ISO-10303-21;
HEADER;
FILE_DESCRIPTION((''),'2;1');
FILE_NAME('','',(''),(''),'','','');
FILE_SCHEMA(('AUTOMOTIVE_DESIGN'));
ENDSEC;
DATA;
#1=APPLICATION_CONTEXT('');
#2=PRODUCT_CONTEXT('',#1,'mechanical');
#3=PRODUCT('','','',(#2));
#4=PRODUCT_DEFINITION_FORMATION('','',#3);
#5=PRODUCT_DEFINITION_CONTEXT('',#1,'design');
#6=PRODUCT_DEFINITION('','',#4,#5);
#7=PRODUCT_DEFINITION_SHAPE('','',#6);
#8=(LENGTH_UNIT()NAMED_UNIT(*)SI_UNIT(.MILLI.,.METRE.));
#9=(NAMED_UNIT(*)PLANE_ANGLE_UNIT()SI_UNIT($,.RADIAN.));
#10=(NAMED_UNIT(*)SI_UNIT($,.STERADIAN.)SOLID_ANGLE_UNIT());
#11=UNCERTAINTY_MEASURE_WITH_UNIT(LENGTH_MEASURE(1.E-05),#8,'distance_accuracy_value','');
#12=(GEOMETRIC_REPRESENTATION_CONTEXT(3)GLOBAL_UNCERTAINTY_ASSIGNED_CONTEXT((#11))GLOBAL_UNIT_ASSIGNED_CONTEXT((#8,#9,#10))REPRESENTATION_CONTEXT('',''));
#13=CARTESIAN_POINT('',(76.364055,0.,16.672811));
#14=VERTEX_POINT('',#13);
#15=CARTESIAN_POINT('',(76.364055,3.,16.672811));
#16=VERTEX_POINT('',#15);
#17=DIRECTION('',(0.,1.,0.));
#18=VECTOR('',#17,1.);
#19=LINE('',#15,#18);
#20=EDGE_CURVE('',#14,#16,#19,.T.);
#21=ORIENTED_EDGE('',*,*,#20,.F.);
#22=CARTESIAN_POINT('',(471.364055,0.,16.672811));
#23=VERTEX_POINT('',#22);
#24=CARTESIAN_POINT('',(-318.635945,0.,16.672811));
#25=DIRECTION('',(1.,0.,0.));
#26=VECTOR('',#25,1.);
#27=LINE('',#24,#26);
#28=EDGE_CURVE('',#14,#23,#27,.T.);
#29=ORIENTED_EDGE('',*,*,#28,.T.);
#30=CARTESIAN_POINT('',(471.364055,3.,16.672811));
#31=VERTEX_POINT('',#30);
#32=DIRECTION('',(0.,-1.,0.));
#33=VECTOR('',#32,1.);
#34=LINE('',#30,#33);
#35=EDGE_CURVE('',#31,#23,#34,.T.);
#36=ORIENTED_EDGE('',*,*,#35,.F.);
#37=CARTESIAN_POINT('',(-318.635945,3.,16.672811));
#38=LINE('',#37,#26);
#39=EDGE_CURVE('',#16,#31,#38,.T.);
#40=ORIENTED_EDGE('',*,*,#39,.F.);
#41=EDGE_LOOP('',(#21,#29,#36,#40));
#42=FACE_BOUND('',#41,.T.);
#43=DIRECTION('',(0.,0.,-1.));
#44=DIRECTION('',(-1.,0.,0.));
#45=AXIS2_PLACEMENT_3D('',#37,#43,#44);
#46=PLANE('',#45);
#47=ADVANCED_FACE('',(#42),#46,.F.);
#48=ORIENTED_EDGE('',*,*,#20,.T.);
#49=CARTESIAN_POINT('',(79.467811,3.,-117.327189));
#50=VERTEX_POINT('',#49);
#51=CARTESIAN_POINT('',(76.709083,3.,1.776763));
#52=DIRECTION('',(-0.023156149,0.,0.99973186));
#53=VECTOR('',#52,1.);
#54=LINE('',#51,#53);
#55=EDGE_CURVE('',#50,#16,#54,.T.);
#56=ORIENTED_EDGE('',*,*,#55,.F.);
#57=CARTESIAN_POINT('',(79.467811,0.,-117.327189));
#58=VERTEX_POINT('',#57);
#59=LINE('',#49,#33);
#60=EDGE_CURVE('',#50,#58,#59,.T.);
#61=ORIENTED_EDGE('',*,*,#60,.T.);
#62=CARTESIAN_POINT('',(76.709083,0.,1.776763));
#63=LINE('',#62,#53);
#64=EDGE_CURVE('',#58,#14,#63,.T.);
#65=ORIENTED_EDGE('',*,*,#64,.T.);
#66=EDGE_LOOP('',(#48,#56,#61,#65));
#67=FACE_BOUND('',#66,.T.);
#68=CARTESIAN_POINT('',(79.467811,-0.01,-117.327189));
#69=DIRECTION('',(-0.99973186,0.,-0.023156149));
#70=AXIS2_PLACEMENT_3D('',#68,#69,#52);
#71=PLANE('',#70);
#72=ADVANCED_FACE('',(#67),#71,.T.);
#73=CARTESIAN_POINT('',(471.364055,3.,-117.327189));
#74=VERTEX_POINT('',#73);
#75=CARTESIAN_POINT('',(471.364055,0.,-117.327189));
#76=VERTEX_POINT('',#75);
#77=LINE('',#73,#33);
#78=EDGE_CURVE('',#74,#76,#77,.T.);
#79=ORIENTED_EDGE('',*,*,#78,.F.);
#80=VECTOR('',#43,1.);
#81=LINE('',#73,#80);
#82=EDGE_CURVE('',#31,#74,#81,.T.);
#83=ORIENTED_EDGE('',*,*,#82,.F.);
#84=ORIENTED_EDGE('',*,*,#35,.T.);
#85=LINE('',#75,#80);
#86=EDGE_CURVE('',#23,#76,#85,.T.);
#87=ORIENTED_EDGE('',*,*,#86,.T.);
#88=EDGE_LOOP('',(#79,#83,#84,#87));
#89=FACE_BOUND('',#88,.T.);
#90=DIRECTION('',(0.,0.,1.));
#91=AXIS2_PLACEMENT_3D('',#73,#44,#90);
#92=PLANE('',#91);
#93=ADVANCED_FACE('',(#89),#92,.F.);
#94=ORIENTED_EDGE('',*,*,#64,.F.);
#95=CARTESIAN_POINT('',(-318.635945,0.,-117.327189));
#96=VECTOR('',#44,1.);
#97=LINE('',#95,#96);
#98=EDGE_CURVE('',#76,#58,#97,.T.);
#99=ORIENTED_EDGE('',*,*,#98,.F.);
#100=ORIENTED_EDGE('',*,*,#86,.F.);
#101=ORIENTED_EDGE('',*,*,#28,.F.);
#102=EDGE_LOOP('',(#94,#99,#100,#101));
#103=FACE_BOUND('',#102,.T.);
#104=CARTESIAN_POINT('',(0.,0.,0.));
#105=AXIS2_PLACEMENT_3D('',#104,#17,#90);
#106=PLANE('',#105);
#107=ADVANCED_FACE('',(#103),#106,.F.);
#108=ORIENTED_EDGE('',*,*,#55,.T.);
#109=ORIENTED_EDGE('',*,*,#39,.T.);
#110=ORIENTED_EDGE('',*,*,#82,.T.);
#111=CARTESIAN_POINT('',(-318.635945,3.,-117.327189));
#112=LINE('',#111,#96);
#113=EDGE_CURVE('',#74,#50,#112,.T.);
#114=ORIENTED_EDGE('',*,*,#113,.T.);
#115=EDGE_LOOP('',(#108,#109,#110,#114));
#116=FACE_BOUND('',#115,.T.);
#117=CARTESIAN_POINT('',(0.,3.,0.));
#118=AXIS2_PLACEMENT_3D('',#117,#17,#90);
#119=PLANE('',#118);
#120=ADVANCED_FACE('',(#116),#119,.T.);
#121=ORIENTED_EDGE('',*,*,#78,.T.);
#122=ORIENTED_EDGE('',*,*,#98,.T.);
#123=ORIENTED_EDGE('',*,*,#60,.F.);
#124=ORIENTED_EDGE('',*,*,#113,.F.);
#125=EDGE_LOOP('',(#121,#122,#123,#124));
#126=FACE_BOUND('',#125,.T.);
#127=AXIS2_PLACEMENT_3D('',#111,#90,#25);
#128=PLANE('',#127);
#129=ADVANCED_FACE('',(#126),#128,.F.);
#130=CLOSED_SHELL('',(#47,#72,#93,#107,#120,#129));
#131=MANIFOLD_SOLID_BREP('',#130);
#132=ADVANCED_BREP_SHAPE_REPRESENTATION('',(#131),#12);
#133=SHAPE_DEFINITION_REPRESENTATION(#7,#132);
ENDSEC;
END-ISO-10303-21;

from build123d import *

# Parameters (mm, degrees)
SKETCH1_W           = 790
SKETCH1_H           = 134
BOSS_EXTRUDE1_DEPTH = 3
SPLIT1_START        = -321.26735161
SPLIT1_OUTLINE_W    = 3
SPLIT1_OUTLINE_H    = 147
SPLIT1_DEPTH        = 397.997008775


# Read off the part's stored shape, not the designer's step: Split1
with BuildPart() as part:
    # Sketch1 → Boss-Extrude1 (new body)
    with BuildSketch(Plane(origin=(0, 0, 0), x_dir=(1, 0, 0), z_dir=(0, 1, 0))):
        with Locations((76.3640553, 50.32718894)):
            Rectangle(SKETCH1_W, SKETCH1_H)
    extrude(amount=BOSS_EXTRUDE1_DEPTH)

    # Split1 outline → Split1 (cut)
    with BuildSketch(Plane(origin=(0, 0, 0), x_dir=(0, 1, 0), z_dir=(0.9997318604438431, 0, 0.023156148502985304)).offset(SPLIT1_START)):
        with Locations((1.5, -47.5)):
            Rectangle(SPLIT1_OUTLINE_W, SPLIT1_OUTLINE_H)
    extrude(amount=SPLIT1_DEPTH, mode=Mode.SUBTRACT)


solid = part.part
